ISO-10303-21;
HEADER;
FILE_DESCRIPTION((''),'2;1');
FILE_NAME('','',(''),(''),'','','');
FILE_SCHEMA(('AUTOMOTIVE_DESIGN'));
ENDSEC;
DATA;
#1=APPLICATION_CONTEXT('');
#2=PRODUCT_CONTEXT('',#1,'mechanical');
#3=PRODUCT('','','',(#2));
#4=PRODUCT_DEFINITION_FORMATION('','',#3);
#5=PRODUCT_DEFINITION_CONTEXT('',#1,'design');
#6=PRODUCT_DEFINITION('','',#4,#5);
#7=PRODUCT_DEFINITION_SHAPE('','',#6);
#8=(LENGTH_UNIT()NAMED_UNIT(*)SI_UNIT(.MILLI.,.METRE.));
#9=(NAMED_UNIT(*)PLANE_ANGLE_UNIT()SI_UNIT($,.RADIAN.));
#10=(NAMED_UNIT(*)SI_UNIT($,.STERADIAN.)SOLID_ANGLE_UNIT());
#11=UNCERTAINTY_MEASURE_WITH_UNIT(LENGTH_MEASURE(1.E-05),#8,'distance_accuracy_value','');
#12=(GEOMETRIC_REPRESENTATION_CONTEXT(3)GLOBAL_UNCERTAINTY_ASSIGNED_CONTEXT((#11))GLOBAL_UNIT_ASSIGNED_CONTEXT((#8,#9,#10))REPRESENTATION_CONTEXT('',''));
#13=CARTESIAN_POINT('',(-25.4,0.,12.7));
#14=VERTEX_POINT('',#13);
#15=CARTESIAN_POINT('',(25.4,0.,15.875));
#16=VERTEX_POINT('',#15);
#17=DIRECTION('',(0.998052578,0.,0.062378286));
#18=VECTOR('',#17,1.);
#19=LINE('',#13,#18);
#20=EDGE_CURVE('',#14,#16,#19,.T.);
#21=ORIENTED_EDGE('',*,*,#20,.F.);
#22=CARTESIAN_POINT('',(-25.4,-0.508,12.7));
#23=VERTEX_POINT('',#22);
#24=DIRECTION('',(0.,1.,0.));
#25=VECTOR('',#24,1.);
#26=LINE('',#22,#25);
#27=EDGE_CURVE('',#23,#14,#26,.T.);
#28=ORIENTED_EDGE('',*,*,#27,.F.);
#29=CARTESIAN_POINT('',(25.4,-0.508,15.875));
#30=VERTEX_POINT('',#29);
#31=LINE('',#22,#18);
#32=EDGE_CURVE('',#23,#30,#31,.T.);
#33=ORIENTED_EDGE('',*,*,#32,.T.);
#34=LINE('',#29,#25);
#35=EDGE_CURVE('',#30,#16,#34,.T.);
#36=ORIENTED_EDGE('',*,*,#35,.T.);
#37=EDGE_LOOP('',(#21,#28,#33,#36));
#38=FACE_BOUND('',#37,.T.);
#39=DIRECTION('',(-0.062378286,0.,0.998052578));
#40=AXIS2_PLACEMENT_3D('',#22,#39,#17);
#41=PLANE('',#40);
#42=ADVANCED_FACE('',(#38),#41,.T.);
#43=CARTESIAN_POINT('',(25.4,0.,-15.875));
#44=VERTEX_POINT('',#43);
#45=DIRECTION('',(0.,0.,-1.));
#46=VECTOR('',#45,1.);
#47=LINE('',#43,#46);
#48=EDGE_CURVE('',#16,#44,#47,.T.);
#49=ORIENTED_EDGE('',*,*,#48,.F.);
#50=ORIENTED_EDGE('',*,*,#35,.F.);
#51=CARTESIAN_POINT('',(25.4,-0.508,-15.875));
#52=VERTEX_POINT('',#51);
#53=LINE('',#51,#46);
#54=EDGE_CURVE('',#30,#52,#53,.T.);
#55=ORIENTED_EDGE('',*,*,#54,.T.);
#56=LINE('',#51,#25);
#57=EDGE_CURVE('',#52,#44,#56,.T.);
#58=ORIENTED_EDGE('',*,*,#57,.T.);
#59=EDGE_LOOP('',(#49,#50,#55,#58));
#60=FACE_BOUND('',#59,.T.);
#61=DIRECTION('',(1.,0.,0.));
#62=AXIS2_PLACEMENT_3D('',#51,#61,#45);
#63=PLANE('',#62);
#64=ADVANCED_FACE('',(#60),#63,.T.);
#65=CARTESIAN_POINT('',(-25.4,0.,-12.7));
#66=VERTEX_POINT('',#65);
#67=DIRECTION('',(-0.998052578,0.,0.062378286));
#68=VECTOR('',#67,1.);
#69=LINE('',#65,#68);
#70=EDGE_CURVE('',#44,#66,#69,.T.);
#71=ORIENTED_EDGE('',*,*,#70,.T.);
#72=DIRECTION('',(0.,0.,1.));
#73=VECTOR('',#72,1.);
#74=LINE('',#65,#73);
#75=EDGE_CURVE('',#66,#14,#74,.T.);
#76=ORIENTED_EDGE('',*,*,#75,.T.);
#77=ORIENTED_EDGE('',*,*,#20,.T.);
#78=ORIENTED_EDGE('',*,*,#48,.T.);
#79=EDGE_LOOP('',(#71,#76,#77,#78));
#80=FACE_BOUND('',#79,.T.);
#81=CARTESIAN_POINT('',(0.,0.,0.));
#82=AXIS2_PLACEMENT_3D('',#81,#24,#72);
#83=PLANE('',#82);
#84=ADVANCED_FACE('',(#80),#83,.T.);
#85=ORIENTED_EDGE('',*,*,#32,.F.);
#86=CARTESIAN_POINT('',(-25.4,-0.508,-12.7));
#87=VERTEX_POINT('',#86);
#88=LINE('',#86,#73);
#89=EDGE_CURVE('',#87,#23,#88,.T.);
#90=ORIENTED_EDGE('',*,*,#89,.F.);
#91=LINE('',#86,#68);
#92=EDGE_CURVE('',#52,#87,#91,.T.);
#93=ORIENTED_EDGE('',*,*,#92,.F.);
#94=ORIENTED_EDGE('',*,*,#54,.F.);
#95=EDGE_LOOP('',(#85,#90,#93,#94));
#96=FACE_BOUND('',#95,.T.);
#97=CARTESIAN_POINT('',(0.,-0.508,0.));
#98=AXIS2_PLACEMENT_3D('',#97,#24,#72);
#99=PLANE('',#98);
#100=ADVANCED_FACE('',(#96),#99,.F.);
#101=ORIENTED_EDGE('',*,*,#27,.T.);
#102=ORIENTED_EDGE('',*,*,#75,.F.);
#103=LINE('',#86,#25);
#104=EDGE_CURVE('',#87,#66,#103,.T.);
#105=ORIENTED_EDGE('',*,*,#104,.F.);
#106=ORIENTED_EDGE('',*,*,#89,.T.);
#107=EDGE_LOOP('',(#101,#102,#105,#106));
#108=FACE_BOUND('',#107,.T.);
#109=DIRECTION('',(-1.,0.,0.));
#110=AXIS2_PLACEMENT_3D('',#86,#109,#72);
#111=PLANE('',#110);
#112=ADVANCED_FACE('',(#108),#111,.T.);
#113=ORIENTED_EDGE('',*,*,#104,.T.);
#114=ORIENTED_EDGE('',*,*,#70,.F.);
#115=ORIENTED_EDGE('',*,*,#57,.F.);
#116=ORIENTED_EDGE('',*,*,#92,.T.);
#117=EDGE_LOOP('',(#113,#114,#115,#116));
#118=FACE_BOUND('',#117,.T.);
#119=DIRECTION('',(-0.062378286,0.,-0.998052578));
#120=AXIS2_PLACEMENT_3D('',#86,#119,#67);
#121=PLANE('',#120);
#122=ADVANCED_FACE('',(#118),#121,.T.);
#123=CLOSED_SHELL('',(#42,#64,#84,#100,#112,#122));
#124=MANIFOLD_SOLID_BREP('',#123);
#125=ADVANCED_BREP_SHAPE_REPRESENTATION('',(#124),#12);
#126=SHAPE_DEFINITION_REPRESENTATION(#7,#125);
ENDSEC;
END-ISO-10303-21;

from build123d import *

# Parameters (mm, degrees)
BASE_FLANGE1_DEPTH = 0.508


# Sheet-metal steps are written as plain solids
with BuildPart() as part:
    # Sketch1 → Base-Flange1 (new body)
    with BuildSketch(Plane(origin=(0, 0, 0), x_dir=(1, 0, 0), z_dir=(0, 1, 0))):
        Polygon((-25.4, 12.7), (25.4, 15.875), (25.4, -15.875), (-25.4, -12.7), align=None)
    extrude(amount=-BASE_FLANGE1_DEPTH)


solid = part.part
